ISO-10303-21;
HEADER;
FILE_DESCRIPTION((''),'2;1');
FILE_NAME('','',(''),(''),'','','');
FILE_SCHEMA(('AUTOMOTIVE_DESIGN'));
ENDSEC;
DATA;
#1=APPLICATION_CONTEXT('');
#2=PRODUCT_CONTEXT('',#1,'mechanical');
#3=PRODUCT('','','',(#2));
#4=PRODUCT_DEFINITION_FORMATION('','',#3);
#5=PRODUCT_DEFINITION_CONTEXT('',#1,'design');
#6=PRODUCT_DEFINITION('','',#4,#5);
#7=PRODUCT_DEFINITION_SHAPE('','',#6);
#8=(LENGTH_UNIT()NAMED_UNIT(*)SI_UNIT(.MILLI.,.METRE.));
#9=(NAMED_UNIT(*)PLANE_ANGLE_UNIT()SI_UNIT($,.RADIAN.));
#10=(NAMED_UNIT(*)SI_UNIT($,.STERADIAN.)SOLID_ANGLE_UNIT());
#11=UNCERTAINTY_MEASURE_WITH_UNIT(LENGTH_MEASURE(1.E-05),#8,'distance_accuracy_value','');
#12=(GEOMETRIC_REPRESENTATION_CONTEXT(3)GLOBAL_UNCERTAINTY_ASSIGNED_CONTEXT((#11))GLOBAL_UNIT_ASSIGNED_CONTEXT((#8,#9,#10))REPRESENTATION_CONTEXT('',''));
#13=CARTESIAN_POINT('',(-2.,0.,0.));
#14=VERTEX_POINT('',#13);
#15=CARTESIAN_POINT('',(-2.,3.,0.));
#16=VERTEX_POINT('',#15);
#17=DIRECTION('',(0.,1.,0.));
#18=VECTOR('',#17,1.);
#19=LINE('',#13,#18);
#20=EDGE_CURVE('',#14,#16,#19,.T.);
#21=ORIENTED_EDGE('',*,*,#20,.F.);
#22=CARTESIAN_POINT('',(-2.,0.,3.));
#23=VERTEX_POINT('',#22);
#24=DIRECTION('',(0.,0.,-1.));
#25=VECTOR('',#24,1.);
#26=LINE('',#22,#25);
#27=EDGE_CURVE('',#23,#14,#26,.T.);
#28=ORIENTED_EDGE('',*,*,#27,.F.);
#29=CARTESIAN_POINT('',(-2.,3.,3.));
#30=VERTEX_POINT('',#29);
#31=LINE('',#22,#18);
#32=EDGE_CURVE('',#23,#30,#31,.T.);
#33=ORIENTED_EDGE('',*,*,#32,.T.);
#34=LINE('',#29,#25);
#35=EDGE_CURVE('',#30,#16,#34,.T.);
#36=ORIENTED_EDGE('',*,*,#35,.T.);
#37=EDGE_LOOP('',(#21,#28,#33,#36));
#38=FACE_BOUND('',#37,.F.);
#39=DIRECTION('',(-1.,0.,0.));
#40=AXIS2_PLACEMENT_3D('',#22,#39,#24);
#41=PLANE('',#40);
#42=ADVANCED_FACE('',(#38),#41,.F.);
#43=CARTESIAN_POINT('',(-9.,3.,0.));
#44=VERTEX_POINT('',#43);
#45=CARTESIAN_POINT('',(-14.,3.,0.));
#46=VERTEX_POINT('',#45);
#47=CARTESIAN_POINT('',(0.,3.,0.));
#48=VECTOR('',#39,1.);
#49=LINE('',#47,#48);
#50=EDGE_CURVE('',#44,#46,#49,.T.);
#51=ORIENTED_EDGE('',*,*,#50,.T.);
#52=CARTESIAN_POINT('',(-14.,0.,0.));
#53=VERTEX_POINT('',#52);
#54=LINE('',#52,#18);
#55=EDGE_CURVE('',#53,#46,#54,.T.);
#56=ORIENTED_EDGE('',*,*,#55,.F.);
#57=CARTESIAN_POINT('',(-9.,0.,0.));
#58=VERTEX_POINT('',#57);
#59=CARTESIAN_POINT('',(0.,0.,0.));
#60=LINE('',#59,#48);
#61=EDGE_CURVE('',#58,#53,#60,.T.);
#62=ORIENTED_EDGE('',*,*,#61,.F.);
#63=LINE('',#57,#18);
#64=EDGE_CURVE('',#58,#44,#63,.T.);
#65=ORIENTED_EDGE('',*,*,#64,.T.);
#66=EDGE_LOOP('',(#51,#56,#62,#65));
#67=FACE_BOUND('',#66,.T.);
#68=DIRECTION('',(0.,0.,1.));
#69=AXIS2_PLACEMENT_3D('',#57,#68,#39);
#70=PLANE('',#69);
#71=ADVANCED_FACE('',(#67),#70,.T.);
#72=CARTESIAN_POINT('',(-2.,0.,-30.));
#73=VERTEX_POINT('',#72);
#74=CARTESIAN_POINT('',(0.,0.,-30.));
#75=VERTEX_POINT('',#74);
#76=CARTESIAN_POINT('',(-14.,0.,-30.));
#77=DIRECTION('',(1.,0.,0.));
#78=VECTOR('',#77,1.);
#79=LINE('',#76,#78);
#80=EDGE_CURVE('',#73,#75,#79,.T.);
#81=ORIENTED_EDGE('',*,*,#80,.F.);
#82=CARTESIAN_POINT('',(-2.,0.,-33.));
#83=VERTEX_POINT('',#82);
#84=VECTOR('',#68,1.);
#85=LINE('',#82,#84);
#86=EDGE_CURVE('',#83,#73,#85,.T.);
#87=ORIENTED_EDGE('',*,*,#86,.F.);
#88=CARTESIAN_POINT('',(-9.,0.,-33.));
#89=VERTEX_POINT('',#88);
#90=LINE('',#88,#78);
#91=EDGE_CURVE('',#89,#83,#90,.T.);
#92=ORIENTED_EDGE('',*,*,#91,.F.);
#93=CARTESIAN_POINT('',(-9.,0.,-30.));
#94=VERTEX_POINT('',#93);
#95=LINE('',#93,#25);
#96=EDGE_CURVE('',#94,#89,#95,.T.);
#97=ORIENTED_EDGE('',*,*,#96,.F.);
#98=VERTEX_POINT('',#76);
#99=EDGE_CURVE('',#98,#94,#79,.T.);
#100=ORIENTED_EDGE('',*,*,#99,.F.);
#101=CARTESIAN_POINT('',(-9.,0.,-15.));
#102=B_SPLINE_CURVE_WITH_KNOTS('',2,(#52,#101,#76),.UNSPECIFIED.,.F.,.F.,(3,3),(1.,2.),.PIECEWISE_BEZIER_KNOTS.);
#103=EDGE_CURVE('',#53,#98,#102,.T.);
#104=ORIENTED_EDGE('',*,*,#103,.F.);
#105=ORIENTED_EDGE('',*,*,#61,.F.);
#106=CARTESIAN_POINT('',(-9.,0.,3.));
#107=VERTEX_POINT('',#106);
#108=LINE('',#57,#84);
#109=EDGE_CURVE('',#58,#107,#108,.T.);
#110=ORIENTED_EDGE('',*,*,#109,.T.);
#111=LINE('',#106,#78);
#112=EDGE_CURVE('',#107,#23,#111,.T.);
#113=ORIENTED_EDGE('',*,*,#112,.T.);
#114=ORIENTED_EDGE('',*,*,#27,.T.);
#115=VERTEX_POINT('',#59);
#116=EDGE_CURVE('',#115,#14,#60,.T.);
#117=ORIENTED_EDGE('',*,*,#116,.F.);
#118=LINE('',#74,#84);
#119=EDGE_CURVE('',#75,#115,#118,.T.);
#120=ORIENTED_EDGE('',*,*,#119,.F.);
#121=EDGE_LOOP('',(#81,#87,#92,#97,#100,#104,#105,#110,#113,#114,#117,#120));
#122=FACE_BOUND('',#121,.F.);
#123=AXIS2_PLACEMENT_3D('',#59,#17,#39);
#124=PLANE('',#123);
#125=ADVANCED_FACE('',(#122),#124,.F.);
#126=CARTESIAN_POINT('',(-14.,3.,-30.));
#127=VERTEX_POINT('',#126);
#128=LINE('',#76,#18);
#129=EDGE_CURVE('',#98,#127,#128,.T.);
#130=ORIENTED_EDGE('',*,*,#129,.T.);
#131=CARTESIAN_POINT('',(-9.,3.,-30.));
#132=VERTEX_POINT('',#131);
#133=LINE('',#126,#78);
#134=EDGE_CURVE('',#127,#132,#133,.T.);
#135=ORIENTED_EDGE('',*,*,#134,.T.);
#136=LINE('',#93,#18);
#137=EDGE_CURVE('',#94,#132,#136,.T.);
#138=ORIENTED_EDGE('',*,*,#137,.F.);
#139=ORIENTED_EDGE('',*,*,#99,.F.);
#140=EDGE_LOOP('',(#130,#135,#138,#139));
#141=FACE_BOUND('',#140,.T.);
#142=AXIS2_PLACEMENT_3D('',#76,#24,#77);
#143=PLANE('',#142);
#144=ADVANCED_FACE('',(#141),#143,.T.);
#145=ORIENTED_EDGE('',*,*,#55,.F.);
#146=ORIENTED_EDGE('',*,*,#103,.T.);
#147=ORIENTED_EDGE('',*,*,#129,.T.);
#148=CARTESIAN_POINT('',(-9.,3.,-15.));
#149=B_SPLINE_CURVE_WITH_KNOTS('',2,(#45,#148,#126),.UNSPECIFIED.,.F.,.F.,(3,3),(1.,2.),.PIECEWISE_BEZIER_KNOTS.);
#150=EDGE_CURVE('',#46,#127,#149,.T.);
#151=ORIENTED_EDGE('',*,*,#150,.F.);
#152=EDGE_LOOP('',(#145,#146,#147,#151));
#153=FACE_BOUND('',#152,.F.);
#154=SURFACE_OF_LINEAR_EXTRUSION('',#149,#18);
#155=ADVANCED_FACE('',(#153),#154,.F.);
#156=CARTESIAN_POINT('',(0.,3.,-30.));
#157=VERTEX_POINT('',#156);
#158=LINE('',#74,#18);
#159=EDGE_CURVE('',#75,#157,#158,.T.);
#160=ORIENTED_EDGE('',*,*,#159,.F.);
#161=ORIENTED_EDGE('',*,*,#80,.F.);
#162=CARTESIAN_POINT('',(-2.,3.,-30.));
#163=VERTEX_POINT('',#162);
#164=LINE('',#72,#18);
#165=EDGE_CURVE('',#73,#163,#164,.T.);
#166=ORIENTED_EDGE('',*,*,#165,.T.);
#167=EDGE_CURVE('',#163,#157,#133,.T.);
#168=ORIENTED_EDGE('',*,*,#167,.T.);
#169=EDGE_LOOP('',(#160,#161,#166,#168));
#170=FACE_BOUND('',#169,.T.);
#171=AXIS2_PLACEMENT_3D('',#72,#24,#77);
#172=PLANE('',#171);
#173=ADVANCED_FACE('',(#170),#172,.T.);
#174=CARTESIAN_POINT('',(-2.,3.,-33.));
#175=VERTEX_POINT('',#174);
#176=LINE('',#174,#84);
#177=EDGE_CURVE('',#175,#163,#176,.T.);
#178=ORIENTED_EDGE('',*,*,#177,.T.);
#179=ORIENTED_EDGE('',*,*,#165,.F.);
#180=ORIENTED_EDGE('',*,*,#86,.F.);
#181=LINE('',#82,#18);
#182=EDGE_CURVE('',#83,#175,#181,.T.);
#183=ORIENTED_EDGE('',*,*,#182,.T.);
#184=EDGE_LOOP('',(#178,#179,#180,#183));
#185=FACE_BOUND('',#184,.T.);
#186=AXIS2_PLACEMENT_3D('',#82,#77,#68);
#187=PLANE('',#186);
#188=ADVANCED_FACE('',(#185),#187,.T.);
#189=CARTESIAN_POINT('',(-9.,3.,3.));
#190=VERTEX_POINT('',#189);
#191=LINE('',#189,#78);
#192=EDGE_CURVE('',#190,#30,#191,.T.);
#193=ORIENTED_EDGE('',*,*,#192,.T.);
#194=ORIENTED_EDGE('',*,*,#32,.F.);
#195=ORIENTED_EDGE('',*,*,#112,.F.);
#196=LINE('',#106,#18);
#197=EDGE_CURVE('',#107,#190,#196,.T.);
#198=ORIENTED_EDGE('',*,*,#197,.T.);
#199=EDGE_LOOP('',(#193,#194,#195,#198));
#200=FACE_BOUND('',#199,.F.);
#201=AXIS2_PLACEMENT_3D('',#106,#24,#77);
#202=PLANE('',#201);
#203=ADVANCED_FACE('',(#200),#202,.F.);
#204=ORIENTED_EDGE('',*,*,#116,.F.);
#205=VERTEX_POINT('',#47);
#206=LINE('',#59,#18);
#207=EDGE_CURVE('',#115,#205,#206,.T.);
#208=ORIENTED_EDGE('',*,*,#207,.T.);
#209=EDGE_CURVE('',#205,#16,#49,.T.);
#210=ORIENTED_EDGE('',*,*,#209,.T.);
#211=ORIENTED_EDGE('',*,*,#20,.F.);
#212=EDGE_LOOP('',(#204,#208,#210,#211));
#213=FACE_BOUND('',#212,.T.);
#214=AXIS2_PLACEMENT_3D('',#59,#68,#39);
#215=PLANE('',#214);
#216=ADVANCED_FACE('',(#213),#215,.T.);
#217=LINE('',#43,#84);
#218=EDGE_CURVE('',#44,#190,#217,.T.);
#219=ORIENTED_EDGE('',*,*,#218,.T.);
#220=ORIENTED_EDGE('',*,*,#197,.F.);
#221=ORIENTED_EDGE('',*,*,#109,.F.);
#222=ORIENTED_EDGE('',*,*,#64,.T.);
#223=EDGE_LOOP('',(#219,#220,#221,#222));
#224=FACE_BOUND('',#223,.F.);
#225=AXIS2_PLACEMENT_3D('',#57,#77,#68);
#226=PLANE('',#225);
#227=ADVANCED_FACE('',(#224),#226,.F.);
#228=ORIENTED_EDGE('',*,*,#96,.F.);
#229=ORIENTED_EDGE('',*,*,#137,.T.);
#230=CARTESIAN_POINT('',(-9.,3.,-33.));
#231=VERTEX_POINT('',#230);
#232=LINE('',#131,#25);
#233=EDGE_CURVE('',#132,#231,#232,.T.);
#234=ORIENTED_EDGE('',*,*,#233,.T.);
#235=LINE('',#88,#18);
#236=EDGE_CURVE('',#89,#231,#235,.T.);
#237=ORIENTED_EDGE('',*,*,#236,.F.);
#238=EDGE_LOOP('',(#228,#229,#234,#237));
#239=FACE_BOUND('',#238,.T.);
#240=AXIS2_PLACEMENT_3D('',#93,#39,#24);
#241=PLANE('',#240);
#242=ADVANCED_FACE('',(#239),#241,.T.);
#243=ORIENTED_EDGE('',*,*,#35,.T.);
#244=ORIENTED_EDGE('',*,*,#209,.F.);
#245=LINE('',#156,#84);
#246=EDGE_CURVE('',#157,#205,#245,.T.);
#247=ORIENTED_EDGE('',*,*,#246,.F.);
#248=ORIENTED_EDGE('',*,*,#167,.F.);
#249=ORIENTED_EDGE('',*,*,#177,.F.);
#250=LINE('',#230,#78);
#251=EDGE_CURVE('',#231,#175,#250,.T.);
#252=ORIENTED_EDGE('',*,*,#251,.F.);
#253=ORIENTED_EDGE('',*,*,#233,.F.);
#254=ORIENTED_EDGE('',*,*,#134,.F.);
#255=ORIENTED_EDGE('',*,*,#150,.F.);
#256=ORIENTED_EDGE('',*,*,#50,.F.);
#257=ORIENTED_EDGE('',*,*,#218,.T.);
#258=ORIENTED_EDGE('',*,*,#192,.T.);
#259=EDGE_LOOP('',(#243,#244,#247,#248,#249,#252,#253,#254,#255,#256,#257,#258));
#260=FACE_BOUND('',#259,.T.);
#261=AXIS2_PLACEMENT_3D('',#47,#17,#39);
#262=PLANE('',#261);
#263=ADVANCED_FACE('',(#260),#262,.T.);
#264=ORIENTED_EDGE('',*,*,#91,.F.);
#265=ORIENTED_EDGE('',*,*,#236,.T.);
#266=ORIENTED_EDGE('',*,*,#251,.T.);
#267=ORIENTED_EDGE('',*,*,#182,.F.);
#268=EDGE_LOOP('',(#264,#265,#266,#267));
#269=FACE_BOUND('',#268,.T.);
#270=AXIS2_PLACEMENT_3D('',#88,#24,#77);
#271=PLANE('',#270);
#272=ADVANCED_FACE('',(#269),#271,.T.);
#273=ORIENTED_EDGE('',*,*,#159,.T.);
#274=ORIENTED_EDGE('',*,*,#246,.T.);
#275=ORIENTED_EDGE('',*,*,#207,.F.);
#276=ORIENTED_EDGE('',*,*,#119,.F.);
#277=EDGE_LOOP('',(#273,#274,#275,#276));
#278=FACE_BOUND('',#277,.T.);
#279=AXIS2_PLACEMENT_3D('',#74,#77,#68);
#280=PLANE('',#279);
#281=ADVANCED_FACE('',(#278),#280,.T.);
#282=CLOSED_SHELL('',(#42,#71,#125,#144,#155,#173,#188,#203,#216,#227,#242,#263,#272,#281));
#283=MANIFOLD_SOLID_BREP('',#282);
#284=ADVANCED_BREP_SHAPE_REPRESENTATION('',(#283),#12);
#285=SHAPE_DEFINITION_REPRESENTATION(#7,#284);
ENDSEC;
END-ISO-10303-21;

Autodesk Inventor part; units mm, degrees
ref_plane "YZ Plane" through (0, 0, 0) normal (1, 0, 0) x (0, 1, 0)
ref_plane "XZ Plane" through (0, 0, 0) normal (0, 1, 0) x (-1, 0, 0)
ref_plane "XY Plane" through (0, 0, 0) normal (0, 0, 1) x (1, 0, 0)
sketch "Esquisse1" plane through (0, 0, 0) normal (0, 1, 0) x (-1, 0, 0)
  line L0 (0, 0) -> (14, 0)
  line L1 (14, 0) -> (14, -30)
  line L2 (14, -30) -> (0, -30)
  line L3 (0, -30) -> (0, 0)
  line L4 (2, 0) -> (9, 0)
  line L5 (9, 0) -> (9, 3)
  line L6 (9, 3) -> (2, 3)
  line L7 (2, 3) -> (2, 0)
  line L8 (14, -15) -> (0, -15) construction
  line L9 (2, -30) -> (9, -30)
  line L10 (9, -30) -> (9, -33)
  line L11 (9, -33) -> (2, -33)
  line L12 (2, -33) -> (2, -30)
  dimension "d0" = 2
  dimension "d1" = 3
  dimension "d2" = 30
  dimension "d3" = 7
  dimension "d4" = 5
extrude "Plaque1" add sketch "Esquisse1" along normal blind 3
sketch "Esquisse2" plane through (0, 3, 0) normal (0, 1, 0) x (1, 0, 0)
  line L0 (-2, 0) -> (-2, -3) construction
  line L1 (0, 0) -> (-2, 0) construction
  line L2 (0, 30) -> (0, 0) construction
  line L3 (-2, 30) -> (0, 30) construction
  line L4 (-2, 33) -> (-2, 30) construction
  line L5 (-9, 33) -> (-2, 33) construction
  line L6 (-9, 30) -> (-9, 33) construction
  line L7 (-14, 30) -> (-9, 30) construction
  line L8 (-14, 0) -> (-14, 30) construction
  line L9 (-9, 0) -> (-14, 0) construction
  line L10 (-9, -3) -> (-9, 0) construction
  line L11 (-2, -3) -> (-9, -3) construction
  line L12 (-14, 0) -> (-14, 30) construction
  line L13 (-14, 0) -> (-9, 15) construction
  line L14 (-9, 15) -> (-14, 30) construction
  spline S0 degree 2 poles (-14, 0) (-9, 15) (-14, 30) knots 1 1 1 2 2 2
  line L15 (-14, 0) -> (-14, 30)
  line L16 (-9, 15) -> (-14, 15) construction
  line L17 (-14, 0) -> (-14, 30) construction
  dimension "d6" = 5
extrude "Couper1" cut sketch "Esquisse2" against normal blind 3
equation "\"d7\" = Epaisseur"
equation "\"LargeurGrugeage\" = Epaisseur"
equation "\"ProfondeurGrugeage\" = 0.5 * Epaisseur"
equation "\"TailleGrugeage\" = 4 * Epaisseur"
equation "\"RestesMinimum\" = 2 * Epaisseur"
equation "\"Rayondetransition\" = RayonPli"
equation "\"TailleRayonJacobi\" = RayonPli"
equation "\"TailleJeu\" = Epaisseur"
equation "\"d5\" = RayonPli"
equation "\"Epaisseur\" = 3"
equation "\"RayonPli\" = 4"
properties part number "tip_up" material "Plastique PMMA"
